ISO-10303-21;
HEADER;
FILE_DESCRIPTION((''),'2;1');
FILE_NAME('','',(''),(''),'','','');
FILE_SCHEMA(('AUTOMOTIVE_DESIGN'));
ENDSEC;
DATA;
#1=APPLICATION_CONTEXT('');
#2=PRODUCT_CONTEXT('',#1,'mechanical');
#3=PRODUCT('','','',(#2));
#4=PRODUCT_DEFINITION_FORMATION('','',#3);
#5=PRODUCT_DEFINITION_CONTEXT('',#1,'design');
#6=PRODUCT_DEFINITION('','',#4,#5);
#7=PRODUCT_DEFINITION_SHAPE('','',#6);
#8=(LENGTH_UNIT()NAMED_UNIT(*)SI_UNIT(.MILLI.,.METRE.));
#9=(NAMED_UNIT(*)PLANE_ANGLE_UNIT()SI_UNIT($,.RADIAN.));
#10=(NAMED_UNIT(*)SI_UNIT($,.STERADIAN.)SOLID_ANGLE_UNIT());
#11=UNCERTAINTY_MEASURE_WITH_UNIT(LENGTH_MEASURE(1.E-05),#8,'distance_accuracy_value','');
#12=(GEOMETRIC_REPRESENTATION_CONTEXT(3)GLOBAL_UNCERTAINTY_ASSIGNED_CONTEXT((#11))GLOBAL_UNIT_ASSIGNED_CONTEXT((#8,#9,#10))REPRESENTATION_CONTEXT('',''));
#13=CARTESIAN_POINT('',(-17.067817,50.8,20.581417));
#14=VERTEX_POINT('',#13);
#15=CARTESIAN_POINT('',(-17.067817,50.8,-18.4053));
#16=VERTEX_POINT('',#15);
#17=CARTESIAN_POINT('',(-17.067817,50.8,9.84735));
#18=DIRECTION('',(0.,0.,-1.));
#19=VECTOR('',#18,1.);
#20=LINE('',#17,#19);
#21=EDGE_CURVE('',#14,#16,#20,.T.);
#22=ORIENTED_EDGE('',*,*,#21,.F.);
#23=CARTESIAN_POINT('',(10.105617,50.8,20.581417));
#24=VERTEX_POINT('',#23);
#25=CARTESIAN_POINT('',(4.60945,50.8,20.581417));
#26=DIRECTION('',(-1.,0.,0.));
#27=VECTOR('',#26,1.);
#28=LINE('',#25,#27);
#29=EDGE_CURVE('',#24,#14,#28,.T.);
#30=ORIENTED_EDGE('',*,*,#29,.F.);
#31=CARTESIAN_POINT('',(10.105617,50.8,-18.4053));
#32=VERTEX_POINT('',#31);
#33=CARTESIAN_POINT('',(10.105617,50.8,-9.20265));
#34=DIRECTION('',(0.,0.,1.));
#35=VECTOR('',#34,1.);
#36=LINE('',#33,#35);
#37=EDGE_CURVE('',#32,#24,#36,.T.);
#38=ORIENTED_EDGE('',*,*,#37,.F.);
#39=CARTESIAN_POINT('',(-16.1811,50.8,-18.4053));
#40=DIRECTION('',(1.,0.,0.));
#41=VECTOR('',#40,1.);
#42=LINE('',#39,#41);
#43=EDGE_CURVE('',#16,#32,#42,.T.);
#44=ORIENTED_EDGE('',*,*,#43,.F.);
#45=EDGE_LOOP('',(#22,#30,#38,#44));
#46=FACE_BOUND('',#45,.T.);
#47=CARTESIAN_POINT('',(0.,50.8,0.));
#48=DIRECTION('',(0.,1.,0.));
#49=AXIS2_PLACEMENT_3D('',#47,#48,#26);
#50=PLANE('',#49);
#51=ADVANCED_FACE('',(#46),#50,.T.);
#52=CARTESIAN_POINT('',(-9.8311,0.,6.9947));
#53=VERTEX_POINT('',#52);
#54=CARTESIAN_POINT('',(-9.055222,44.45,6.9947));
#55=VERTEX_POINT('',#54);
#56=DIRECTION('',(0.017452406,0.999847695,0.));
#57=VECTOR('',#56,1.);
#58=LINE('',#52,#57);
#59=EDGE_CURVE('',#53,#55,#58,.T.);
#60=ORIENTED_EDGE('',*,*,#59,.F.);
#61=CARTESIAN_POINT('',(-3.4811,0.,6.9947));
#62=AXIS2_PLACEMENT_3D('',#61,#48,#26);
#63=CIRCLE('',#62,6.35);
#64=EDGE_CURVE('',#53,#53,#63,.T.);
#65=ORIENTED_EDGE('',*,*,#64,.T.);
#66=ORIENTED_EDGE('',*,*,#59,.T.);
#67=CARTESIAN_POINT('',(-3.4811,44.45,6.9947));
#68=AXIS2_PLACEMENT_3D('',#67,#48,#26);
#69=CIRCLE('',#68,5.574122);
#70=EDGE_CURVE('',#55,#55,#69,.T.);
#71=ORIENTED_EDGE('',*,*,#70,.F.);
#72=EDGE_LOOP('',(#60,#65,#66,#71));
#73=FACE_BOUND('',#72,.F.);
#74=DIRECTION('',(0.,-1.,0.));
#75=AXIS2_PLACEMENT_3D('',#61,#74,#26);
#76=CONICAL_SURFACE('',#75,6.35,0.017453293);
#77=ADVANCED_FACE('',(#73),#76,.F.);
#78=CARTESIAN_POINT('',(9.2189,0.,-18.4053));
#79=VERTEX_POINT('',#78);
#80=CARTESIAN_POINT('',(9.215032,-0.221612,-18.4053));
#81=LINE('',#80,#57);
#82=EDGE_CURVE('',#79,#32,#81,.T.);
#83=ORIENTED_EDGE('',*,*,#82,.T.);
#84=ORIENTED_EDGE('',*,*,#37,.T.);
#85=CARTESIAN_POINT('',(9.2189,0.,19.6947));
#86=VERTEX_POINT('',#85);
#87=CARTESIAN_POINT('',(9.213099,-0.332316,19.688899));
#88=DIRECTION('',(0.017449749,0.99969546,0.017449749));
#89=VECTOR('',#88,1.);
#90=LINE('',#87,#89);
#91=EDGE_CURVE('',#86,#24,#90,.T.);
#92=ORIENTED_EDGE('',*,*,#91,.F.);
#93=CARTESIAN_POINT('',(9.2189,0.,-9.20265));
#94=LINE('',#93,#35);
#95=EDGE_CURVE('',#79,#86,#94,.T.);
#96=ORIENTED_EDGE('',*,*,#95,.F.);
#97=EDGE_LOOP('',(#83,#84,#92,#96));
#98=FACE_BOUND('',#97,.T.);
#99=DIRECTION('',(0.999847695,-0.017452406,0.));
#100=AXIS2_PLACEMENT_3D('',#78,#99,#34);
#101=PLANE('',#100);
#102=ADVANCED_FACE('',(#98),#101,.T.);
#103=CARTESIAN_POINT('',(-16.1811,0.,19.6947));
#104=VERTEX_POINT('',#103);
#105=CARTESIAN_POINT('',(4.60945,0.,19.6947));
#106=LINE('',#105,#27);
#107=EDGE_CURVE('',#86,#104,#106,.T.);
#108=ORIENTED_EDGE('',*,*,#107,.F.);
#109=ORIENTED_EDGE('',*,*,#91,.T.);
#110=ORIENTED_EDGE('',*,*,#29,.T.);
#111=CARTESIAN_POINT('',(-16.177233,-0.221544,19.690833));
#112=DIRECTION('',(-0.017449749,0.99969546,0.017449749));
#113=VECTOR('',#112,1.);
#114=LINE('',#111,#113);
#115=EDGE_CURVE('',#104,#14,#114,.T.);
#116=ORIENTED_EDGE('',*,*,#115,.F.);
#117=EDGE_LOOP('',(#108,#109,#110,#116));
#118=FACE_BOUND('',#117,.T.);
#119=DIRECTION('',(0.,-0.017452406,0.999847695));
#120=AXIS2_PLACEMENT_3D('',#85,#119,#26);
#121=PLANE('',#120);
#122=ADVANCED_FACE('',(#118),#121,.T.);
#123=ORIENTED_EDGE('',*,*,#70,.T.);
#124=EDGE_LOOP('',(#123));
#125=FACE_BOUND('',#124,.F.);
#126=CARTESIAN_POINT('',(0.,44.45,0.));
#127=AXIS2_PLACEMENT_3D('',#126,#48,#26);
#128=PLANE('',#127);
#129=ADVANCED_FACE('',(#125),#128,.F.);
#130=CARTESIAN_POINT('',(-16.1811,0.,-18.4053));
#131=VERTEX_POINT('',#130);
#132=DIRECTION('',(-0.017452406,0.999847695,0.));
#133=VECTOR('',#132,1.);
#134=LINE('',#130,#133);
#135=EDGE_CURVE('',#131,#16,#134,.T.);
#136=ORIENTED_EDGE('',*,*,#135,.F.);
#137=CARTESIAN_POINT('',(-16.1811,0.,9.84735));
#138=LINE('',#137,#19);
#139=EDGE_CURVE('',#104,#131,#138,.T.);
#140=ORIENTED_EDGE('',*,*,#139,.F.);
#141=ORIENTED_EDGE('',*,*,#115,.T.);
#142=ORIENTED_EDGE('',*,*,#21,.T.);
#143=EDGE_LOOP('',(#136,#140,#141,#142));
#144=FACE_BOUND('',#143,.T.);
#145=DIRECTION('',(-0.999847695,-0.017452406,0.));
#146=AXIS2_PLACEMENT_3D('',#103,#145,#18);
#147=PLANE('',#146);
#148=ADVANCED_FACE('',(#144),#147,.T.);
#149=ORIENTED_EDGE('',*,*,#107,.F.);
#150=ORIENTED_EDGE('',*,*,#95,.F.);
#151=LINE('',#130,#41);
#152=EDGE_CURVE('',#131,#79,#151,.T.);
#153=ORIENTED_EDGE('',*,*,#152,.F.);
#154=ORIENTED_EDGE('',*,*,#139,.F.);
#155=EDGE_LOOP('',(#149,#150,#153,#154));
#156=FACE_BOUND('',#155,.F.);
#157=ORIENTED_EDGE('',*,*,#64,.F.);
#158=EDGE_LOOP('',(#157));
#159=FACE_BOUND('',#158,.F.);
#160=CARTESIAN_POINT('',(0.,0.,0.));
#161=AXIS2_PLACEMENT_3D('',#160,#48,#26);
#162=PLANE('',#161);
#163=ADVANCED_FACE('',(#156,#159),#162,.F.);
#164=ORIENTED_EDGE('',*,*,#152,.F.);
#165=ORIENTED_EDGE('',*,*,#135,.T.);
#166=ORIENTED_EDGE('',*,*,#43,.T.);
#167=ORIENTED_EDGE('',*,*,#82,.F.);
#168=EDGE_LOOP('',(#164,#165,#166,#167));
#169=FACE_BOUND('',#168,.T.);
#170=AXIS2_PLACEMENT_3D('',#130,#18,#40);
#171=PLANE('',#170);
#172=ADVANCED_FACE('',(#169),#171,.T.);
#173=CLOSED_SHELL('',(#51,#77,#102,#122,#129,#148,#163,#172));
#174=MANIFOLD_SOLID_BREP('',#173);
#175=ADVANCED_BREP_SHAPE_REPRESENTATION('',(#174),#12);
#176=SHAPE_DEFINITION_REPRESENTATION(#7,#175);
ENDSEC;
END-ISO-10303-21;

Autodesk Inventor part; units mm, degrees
ref_plane "YZ Plane" through (0, 0, 0) normal (1, 0, 0) x (0, 1, 0)
ref_plane "XZ Plane" through (0, 0, 0) normal (0, 1, 0) x (-1, 0, 0)
ref_plane "XY Plane" through (0, 0, 0) normal (0, 0, 1) x (1, 0, 0)
sketch "Sketch1" plane through (0, 0, 0) normal (0, 1, 0) x (-1, 0, 0)
  circle A0 centre (3.4811, 6.9947) radius 6.35
  line L0 (-9.2189, 19.6947) -> (16.1811, 19.6947)
  line L1 (16.1811, 19.6947) -> (16.1811, -18.4053)
  line L2 (16.1811, -18.4053) -> (-9.2189, -18.4053)
  line L3 (-9.2189, -18.4053) -> (-9.2189, 19.6947)
  point P0 (0, 0)
  dimension "d0" = 12.7
  dimension "d1" = 25.4
  dimension "d2" = 38.1
  dimension "d3" = 12.7
  dimension "d4" = 12.7
extrude "Extrusion1" add sketch "Sketch1" along normal blind 50.8 contours A0 | L0 L1 L2 L3
extrude "Extrusion2" cut sketch "Sketch1" along normal blind 44.45 contours A0
draft "FaceDraft1" angle 1 pull direction (0, -1, 0) faces at (9.2189, 16.9333, 6.9947) (-16.1811, 16.9333, -5.7053) (-7.7145, 33.8667, 19.6947) (-9.7489, 29.6333, 5.9761) fixed edges at (9.2189, 0, 0.6447) (-16.1811, 0, 0.6447) (-3.4811, 0, 19.6947) (2.8689, 0, 6.9947)
properties part number "Cylinder Cast Image"
